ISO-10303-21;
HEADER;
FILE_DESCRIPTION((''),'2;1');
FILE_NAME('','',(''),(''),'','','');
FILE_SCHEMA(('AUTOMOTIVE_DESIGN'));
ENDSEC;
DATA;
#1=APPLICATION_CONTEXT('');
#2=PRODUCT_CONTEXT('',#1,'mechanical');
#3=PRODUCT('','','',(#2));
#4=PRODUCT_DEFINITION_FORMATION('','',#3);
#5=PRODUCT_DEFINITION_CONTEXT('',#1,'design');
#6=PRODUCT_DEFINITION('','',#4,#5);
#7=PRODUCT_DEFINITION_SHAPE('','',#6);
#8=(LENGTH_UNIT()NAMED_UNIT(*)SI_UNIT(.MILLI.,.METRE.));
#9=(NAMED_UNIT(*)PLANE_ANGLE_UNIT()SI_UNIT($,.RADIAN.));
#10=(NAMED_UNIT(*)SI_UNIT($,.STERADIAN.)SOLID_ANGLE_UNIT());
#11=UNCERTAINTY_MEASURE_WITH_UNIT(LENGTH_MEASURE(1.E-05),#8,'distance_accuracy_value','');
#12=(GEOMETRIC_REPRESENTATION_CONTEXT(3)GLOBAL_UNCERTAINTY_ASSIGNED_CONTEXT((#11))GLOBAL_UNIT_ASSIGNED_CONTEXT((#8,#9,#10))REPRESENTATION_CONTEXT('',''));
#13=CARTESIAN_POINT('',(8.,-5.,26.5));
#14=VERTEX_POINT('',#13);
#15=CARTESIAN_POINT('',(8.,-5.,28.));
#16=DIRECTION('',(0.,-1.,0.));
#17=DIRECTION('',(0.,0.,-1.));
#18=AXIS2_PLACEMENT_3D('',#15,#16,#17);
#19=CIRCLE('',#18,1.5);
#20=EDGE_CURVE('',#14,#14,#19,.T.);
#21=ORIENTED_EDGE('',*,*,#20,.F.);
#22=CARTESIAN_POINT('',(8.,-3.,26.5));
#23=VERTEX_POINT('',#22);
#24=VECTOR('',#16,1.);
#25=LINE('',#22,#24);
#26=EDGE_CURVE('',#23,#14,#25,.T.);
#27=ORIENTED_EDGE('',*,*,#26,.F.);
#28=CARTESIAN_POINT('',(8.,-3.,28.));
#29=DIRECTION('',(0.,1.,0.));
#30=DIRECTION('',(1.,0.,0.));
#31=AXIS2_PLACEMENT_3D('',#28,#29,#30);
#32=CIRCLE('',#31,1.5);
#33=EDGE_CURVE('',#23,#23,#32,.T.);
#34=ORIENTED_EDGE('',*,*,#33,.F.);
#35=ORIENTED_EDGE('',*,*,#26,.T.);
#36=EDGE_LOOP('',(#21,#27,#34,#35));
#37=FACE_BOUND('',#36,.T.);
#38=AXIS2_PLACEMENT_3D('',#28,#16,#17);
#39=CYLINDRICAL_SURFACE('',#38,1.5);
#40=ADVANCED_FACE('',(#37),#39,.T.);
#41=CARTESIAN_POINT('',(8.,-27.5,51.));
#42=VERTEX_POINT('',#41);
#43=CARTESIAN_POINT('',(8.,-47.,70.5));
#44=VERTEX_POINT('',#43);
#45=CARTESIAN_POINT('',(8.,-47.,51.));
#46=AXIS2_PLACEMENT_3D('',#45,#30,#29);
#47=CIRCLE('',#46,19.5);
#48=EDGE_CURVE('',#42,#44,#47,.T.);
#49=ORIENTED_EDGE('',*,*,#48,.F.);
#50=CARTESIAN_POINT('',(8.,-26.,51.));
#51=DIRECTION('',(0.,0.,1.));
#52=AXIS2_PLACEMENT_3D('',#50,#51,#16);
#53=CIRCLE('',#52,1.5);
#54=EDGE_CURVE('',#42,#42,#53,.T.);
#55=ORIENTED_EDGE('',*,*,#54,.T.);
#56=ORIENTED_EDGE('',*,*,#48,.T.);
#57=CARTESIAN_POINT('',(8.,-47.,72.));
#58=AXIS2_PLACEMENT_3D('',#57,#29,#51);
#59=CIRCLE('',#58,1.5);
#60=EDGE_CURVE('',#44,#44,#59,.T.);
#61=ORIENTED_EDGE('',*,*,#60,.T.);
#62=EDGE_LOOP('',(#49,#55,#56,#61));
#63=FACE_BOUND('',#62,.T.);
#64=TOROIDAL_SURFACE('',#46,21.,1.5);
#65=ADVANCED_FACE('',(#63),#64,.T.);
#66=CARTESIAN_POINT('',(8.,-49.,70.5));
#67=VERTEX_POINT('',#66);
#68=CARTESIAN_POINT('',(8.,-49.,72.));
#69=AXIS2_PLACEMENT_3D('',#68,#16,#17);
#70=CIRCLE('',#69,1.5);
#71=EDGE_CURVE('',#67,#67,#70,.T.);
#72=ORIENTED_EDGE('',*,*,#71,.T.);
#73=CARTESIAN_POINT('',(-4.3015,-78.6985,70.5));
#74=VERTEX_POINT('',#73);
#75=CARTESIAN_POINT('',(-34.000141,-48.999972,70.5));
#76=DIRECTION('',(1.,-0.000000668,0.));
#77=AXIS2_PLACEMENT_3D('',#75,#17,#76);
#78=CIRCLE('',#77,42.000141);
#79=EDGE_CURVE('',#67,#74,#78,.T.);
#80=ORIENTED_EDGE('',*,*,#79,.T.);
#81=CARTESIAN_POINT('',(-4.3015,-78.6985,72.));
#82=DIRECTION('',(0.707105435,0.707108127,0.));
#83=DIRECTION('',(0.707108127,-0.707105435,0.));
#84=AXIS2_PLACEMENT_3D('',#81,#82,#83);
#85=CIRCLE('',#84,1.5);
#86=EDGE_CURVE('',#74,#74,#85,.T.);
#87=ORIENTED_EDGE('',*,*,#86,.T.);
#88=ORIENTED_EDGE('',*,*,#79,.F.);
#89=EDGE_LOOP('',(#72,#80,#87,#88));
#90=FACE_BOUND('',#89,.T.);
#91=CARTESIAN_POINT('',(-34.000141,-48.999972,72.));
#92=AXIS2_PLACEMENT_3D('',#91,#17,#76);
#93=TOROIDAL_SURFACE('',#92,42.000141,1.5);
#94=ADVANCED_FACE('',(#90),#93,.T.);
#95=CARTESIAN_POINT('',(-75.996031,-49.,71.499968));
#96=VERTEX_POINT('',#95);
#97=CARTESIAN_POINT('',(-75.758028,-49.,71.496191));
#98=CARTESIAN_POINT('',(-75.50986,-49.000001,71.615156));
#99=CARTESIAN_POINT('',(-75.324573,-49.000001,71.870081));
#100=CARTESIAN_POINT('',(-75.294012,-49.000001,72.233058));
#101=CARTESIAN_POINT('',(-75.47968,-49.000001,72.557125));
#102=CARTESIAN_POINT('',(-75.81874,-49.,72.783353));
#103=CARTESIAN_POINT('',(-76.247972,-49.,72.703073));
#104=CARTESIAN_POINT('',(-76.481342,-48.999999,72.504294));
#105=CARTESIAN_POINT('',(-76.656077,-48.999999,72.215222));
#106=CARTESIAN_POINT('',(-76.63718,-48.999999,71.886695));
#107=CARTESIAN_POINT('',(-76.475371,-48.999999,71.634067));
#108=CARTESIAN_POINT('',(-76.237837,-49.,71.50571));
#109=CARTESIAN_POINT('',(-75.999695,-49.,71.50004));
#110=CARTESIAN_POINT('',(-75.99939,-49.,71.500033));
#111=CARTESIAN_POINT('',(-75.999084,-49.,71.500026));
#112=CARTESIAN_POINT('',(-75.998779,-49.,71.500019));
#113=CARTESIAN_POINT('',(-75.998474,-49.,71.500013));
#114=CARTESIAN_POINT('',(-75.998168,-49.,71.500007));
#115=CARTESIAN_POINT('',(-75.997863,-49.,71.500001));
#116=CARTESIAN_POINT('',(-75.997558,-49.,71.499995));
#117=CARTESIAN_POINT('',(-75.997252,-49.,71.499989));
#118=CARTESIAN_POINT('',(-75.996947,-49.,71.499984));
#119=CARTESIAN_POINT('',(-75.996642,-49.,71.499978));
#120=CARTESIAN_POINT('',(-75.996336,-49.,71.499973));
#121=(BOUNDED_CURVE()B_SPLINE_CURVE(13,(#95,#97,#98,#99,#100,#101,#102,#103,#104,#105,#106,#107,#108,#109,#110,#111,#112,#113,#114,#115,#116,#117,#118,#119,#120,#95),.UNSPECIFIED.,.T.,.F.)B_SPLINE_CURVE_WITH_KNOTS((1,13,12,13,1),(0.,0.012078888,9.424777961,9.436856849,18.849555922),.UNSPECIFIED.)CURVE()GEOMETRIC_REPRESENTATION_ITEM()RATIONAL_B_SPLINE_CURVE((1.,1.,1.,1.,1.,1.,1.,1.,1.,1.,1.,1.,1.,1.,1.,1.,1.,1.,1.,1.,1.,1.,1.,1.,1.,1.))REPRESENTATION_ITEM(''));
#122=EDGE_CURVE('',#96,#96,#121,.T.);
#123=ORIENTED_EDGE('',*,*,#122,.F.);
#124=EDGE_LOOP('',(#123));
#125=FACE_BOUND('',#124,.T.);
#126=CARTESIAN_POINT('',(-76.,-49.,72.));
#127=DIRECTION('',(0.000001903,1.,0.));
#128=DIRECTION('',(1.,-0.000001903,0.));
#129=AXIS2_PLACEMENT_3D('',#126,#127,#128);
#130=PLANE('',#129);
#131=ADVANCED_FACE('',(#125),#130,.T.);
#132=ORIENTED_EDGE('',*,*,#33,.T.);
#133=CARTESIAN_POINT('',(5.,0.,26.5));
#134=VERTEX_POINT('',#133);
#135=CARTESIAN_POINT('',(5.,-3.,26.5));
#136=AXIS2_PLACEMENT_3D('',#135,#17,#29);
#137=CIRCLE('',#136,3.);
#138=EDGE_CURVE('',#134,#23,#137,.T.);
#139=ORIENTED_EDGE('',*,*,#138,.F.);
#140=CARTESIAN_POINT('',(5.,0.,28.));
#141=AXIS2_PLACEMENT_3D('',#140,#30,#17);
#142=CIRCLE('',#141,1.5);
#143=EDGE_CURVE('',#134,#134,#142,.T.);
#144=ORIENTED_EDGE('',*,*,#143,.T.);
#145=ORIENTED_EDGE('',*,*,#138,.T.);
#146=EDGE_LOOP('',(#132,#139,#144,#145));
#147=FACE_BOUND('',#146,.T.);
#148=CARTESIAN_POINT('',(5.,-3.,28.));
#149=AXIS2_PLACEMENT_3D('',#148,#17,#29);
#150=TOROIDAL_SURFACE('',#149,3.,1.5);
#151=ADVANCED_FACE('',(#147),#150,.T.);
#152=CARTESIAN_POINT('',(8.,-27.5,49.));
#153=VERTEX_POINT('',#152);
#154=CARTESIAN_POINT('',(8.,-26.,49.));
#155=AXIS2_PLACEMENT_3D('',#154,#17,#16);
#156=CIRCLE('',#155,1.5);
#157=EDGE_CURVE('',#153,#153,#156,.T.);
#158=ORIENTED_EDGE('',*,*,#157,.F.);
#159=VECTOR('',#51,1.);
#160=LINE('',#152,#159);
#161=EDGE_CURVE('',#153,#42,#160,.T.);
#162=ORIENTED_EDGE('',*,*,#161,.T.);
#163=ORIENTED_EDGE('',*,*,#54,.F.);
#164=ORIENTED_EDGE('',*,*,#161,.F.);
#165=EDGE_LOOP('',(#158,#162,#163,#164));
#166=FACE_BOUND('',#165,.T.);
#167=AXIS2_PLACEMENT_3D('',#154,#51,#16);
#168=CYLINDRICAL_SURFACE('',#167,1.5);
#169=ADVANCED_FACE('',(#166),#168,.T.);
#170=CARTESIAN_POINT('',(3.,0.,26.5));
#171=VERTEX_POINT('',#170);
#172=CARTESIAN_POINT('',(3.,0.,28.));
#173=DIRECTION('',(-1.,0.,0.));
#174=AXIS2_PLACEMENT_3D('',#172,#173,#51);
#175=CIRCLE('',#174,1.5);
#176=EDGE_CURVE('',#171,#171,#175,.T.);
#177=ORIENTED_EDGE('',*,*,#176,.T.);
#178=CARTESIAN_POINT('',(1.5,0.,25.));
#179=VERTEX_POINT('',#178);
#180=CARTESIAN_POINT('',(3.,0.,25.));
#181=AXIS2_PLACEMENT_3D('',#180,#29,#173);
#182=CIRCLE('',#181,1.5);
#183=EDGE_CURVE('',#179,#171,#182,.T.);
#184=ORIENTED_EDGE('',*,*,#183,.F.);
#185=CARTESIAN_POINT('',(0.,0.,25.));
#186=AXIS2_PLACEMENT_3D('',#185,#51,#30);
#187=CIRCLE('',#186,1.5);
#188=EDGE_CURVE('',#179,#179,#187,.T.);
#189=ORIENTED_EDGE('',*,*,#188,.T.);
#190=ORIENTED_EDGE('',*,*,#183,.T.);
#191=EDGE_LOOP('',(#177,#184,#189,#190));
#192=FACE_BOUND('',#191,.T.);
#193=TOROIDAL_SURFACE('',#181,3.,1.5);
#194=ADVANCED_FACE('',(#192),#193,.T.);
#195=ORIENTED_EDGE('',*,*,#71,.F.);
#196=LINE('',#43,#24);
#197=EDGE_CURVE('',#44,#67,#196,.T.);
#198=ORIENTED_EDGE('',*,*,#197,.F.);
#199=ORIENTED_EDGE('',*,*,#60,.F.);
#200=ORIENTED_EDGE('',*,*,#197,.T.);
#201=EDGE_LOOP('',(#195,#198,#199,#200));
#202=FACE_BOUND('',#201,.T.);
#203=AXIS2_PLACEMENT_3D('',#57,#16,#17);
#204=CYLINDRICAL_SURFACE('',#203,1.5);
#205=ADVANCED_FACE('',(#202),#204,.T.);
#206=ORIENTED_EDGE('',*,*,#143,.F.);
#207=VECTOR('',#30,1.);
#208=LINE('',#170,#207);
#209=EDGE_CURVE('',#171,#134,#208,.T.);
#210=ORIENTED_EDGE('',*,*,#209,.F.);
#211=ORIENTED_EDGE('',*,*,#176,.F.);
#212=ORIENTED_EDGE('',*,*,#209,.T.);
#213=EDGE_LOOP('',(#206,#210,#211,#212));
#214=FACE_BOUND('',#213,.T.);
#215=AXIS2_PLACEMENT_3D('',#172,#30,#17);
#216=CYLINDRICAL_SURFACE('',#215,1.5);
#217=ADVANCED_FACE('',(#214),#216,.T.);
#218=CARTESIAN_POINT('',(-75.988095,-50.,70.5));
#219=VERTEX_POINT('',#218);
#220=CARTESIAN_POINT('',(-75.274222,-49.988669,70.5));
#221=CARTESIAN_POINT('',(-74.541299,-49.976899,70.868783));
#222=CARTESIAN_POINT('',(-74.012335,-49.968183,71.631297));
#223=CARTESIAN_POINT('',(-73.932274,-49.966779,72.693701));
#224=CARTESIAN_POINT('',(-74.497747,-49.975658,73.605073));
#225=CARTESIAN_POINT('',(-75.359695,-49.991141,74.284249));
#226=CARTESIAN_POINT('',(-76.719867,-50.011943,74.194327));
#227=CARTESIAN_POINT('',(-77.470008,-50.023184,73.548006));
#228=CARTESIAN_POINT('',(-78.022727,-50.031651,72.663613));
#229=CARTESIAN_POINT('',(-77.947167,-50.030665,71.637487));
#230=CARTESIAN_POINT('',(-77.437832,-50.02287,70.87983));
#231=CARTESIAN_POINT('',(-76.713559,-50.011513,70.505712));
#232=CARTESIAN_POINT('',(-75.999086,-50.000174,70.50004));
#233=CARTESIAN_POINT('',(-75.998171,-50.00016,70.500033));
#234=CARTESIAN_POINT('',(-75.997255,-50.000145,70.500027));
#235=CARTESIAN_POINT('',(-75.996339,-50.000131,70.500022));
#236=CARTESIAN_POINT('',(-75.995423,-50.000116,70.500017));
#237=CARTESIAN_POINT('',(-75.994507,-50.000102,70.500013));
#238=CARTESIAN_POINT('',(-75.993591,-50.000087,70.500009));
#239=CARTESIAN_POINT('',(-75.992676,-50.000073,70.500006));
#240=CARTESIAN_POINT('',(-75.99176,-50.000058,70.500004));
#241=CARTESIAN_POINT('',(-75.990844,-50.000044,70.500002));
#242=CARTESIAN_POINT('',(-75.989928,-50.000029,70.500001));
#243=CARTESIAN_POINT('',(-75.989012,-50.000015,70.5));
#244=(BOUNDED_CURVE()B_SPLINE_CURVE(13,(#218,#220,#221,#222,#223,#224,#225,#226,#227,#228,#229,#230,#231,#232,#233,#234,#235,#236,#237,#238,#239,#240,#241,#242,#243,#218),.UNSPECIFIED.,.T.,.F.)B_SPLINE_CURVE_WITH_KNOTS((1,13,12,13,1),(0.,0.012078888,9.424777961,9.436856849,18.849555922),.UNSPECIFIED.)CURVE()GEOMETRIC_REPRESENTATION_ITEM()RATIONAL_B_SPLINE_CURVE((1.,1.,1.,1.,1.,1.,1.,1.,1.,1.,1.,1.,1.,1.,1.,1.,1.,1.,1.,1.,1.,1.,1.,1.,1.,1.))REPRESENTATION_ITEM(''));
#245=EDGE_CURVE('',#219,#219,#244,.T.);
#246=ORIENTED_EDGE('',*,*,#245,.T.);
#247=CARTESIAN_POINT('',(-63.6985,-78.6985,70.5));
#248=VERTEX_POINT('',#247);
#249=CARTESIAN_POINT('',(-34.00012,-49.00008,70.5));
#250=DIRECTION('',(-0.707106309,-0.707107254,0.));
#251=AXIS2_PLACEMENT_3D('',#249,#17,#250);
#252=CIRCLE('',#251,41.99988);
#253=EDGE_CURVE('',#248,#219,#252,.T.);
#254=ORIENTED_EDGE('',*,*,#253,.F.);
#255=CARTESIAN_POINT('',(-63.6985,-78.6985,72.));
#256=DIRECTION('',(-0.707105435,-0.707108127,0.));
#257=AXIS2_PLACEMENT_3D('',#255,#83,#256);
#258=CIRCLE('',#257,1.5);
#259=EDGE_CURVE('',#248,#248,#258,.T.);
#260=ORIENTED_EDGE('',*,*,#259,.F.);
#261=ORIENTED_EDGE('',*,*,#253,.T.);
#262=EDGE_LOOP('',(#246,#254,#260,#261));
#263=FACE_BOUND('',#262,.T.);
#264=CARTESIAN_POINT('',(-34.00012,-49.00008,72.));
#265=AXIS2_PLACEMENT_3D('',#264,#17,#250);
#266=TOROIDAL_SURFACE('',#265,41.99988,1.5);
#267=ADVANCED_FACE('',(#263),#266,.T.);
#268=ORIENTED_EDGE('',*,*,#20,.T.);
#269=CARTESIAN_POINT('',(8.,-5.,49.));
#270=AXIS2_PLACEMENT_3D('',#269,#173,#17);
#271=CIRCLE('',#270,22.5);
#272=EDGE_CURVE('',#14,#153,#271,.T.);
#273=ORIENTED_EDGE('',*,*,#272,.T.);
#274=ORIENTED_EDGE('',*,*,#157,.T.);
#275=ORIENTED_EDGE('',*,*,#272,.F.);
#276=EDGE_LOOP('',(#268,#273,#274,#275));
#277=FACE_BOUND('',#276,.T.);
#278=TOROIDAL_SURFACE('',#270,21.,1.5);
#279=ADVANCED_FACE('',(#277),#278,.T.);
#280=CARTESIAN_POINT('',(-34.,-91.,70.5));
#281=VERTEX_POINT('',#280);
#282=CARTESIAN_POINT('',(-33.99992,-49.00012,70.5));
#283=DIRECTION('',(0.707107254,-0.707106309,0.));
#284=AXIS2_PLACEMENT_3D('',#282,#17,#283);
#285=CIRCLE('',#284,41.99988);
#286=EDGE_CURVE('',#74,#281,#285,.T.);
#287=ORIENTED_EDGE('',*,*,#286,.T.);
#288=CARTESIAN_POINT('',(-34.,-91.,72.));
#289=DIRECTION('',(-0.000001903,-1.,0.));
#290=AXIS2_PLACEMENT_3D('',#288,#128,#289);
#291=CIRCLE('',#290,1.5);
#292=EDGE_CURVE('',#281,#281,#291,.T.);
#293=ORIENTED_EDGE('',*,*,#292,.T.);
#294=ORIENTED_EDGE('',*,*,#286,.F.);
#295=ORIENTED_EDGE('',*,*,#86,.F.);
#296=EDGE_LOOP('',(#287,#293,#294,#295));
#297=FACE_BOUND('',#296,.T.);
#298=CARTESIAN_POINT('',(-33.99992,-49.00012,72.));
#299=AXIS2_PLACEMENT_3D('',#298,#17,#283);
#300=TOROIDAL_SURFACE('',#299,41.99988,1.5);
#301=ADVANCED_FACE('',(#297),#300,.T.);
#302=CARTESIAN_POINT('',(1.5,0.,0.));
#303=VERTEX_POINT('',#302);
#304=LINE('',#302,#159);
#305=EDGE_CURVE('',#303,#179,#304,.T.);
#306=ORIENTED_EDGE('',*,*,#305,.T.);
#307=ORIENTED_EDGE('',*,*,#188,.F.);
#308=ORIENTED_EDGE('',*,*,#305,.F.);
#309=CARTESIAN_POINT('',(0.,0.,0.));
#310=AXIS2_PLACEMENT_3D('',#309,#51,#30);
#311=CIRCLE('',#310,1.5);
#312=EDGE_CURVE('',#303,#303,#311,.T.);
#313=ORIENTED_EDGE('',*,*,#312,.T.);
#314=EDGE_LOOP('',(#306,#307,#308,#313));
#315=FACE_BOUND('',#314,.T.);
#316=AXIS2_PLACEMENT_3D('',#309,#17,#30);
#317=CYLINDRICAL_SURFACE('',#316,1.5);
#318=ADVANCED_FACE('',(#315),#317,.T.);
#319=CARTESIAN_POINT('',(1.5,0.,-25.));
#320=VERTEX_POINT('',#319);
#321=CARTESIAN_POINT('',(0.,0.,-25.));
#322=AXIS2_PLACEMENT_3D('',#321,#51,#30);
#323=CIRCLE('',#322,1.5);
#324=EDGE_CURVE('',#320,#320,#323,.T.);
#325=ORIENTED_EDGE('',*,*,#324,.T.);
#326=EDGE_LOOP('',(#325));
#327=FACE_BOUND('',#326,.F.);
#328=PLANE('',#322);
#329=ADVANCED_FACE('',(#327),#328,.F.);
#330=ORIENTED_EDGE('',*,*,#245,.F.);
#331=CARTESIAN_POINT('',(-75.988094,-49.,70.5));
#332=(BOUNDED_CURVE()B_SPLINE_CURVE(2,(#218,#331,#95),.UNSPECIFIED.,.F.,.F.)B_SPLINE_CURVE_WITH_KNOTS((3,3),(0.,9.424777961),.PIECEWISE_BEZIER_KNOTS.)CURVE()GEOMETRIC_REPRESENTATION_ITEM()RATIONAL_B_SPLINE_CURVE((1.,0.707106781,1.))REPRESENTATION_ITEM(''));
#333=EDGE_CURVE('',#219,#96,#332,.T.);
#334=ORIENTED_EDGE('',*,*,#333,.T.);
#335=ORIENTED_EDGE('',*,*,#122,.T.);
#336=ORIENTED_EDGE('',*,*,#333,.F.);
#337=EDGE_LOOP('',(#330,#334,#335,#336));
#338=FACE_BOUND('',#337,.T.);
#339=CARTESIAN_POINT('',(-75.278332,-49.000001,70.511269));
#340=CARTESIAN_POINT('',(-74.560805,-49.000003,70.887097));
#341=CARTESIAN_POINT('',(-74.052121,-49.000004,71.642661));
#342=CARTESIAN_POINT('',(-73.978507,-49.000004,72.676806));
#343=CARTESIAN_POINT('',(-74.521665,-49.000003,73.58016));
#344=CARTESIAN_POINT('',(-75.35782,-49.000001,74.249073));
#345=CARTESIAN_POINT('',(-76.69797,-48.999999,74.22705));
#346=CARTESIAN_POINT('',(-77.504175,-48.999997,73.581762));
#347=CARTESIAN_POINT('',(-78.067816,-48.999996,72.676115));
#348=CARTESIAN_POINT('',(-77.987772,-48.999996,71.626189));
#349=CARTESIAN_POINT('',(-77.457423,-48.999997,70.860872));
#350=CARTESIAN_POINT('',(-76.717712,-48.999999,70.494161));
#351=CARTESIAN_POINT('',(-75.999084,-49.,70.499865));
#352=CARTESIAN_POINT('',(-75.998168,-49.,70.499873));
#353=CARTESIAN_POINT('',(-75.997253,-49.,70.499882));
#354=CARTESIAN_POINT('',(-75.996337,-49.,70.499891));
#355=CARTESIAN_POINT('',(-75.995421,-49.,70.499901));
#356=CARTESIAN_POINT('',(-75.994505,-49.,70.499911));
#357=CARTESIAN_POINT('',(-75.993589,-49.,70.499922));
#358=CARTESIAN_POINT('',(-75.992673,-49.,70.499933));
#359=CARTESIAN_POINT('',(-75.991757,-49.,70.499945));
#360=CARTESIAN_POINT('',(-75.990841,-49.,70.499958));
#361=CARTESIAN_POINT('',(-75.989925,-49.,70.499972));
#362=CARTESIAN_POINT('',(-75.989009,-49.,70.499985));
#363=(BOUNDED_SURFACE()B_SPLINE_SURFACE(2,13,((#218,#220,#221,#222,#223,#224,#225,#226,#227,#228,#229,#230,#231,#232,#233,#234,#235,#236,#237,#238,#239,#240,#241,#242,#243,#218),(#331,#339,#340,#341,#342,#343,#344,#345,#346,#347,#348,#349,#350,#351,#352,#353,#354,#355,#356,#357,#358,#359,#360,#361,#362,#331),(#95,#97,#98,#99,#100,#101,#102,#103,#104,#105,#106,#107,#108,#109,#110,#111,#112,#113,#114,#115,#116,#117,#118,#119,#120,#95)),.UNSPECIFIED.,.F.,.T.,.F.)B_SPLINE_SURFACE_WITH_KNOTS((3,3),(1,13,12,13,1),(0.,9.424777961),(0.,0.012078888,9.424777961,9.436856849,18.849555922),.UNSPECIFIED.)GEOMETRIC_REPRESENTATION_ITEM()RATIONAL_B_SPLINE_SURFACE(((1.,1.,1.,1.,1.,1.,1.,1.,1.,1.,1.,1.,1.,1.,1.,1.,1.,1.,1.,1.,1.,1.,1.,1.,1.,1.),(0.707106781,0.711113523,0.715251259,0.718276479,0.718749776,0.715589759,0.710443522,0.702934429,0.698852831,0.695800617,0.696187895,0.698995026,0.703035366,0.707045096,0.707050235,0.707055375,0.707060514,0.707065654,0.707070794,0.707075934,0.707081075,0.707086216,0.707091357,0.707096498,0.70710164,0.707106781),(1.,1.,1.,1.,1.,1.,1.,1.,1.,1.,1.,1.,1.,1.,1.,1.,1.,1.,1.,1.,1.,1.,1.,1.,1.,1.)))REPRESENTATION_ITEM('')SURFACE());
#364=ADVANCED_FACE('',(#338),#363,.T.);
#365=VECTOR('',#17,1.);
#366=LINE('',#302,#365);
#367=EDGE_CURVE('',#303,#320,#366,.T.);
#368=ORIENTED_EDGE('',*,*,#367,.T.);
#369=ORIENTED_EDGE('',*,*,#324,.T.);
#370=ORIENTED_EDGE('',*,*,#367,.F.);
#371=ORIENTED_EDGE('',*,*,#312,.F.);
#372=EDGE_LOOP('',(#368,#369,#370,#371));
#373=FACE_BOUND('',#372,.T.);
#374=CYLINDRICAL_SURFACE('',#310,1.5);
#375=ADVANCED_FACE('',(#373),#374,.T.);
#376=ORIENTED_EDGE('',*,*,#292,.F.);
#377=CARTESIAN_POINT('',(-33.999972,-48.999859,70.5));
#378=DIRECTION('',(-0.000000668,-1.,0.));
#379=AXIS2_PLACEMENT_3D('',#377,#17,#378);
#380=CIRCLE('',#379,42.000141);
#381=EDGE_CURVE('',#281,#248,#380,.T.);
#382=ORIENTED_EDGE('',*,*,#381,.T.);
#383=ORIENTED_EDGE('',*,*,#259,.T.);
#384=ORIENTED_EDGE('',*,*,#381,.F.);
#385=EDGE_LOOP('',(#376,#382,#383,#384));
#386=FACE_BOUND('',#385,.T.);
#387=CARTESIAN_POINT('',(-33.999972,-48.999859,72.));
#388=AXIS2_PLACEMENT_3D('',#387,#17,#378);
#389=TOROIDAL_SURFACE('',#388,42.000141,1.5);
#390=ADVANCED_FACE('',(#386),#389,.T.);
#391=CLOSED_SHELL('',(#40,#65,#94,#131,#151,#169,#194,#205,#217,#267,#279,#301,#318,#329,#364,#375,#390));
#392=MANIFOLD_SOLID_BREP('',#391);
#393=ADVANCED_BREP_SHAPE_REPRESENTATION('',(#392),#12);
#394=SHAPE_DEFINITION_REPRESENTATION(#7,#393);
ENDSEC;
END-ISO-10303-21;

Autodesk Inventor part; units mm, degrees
ref_plane "YZ Plane" through (0, 0, 0) normal (1, 0, 0) x (0, 1, 0)
ref_plane "XZ Plane" through (0, 0, 0) normal (0, 1, 0) x (-1, 0, 0)
ref_plane "XY Plane" through (0, 0, 0) normal (0, 0, 1) x (1, 0, 0)
sketch "Sketch1" plane through (0, 0, 0) normal (0, 0, 1) x (1, 0, 0)
  circle A0 centre (0, 0) radius 1.5
  dimension "Diameter" = 3
extrude "Extrusion1" add sketch "Sketch1" along normal mid plane 50
thread "Thread1"
sketch "Sketch3" plane through (0, 0, 25) normal (0, 0, 1) x (1, 0, 0)
  circle A0 centre (0, 0) radius 1.5 projected
sketch3d "3D Sketch2"
  arc A0 (0, 0, 25) -> (3, 0, 28) centre (3, 0, 25) ccw
  line L0 (3, 0, 28) -> (5, 0, 28)
  arc A1 (5, 0, 28) -> (8, -3, 28) centre (5, -3, 28) ccw
  line L1 (8, -3, 28) -> (8, -5, 28)
  arc A2 (8, -5, 28) -> (8, -26, 49) centre (8, -5, 49) ccw
  line L2 (8, -26, 49) -> (8, -26, 51)
  arc A3 (8, -26, 51) -> (8, -47, 72) centre (8, -47, 51) ccw
  line L3 (8, -47, 72) -> (8, -49, 72)
  arc A4 (8, -49, 72) -> (-4.3015, -78.6985, 72) centre (-34, -49, 72) ccw
  arc A5 (-4.3015, -78.6985, 72) -> (-34, -91, 72) centre (-34, -49, 72) ccw
  arc A6 (-34, -91, 72) -> (-63.6985, -78.6985, 72) centre (-34, -49, 72) ccw
  arc A7 (-63.6985, -78.6985, 72) -> (-76, -49, 72) centre (-34, -49, 72) ccw
  dimension "d12" = 3
  dimension "d14" = 3
  dimension "d15" = 2
  dimension "d16" = 2
  dimension "d17" = 21
  dimension "d18" = 2
  dimension "d19" = 21
  dimension "d20" = 2
  dimension "d25" = 42
sweep "Sweep2" add profiles "Sketch3" path "3D Sketch2"
fillet "Fillet2" radius 1 1 edges at (-76, -49, 73.5)
properties part number "Tea Lifter Arm" material "Bronze, Soft Tin"
